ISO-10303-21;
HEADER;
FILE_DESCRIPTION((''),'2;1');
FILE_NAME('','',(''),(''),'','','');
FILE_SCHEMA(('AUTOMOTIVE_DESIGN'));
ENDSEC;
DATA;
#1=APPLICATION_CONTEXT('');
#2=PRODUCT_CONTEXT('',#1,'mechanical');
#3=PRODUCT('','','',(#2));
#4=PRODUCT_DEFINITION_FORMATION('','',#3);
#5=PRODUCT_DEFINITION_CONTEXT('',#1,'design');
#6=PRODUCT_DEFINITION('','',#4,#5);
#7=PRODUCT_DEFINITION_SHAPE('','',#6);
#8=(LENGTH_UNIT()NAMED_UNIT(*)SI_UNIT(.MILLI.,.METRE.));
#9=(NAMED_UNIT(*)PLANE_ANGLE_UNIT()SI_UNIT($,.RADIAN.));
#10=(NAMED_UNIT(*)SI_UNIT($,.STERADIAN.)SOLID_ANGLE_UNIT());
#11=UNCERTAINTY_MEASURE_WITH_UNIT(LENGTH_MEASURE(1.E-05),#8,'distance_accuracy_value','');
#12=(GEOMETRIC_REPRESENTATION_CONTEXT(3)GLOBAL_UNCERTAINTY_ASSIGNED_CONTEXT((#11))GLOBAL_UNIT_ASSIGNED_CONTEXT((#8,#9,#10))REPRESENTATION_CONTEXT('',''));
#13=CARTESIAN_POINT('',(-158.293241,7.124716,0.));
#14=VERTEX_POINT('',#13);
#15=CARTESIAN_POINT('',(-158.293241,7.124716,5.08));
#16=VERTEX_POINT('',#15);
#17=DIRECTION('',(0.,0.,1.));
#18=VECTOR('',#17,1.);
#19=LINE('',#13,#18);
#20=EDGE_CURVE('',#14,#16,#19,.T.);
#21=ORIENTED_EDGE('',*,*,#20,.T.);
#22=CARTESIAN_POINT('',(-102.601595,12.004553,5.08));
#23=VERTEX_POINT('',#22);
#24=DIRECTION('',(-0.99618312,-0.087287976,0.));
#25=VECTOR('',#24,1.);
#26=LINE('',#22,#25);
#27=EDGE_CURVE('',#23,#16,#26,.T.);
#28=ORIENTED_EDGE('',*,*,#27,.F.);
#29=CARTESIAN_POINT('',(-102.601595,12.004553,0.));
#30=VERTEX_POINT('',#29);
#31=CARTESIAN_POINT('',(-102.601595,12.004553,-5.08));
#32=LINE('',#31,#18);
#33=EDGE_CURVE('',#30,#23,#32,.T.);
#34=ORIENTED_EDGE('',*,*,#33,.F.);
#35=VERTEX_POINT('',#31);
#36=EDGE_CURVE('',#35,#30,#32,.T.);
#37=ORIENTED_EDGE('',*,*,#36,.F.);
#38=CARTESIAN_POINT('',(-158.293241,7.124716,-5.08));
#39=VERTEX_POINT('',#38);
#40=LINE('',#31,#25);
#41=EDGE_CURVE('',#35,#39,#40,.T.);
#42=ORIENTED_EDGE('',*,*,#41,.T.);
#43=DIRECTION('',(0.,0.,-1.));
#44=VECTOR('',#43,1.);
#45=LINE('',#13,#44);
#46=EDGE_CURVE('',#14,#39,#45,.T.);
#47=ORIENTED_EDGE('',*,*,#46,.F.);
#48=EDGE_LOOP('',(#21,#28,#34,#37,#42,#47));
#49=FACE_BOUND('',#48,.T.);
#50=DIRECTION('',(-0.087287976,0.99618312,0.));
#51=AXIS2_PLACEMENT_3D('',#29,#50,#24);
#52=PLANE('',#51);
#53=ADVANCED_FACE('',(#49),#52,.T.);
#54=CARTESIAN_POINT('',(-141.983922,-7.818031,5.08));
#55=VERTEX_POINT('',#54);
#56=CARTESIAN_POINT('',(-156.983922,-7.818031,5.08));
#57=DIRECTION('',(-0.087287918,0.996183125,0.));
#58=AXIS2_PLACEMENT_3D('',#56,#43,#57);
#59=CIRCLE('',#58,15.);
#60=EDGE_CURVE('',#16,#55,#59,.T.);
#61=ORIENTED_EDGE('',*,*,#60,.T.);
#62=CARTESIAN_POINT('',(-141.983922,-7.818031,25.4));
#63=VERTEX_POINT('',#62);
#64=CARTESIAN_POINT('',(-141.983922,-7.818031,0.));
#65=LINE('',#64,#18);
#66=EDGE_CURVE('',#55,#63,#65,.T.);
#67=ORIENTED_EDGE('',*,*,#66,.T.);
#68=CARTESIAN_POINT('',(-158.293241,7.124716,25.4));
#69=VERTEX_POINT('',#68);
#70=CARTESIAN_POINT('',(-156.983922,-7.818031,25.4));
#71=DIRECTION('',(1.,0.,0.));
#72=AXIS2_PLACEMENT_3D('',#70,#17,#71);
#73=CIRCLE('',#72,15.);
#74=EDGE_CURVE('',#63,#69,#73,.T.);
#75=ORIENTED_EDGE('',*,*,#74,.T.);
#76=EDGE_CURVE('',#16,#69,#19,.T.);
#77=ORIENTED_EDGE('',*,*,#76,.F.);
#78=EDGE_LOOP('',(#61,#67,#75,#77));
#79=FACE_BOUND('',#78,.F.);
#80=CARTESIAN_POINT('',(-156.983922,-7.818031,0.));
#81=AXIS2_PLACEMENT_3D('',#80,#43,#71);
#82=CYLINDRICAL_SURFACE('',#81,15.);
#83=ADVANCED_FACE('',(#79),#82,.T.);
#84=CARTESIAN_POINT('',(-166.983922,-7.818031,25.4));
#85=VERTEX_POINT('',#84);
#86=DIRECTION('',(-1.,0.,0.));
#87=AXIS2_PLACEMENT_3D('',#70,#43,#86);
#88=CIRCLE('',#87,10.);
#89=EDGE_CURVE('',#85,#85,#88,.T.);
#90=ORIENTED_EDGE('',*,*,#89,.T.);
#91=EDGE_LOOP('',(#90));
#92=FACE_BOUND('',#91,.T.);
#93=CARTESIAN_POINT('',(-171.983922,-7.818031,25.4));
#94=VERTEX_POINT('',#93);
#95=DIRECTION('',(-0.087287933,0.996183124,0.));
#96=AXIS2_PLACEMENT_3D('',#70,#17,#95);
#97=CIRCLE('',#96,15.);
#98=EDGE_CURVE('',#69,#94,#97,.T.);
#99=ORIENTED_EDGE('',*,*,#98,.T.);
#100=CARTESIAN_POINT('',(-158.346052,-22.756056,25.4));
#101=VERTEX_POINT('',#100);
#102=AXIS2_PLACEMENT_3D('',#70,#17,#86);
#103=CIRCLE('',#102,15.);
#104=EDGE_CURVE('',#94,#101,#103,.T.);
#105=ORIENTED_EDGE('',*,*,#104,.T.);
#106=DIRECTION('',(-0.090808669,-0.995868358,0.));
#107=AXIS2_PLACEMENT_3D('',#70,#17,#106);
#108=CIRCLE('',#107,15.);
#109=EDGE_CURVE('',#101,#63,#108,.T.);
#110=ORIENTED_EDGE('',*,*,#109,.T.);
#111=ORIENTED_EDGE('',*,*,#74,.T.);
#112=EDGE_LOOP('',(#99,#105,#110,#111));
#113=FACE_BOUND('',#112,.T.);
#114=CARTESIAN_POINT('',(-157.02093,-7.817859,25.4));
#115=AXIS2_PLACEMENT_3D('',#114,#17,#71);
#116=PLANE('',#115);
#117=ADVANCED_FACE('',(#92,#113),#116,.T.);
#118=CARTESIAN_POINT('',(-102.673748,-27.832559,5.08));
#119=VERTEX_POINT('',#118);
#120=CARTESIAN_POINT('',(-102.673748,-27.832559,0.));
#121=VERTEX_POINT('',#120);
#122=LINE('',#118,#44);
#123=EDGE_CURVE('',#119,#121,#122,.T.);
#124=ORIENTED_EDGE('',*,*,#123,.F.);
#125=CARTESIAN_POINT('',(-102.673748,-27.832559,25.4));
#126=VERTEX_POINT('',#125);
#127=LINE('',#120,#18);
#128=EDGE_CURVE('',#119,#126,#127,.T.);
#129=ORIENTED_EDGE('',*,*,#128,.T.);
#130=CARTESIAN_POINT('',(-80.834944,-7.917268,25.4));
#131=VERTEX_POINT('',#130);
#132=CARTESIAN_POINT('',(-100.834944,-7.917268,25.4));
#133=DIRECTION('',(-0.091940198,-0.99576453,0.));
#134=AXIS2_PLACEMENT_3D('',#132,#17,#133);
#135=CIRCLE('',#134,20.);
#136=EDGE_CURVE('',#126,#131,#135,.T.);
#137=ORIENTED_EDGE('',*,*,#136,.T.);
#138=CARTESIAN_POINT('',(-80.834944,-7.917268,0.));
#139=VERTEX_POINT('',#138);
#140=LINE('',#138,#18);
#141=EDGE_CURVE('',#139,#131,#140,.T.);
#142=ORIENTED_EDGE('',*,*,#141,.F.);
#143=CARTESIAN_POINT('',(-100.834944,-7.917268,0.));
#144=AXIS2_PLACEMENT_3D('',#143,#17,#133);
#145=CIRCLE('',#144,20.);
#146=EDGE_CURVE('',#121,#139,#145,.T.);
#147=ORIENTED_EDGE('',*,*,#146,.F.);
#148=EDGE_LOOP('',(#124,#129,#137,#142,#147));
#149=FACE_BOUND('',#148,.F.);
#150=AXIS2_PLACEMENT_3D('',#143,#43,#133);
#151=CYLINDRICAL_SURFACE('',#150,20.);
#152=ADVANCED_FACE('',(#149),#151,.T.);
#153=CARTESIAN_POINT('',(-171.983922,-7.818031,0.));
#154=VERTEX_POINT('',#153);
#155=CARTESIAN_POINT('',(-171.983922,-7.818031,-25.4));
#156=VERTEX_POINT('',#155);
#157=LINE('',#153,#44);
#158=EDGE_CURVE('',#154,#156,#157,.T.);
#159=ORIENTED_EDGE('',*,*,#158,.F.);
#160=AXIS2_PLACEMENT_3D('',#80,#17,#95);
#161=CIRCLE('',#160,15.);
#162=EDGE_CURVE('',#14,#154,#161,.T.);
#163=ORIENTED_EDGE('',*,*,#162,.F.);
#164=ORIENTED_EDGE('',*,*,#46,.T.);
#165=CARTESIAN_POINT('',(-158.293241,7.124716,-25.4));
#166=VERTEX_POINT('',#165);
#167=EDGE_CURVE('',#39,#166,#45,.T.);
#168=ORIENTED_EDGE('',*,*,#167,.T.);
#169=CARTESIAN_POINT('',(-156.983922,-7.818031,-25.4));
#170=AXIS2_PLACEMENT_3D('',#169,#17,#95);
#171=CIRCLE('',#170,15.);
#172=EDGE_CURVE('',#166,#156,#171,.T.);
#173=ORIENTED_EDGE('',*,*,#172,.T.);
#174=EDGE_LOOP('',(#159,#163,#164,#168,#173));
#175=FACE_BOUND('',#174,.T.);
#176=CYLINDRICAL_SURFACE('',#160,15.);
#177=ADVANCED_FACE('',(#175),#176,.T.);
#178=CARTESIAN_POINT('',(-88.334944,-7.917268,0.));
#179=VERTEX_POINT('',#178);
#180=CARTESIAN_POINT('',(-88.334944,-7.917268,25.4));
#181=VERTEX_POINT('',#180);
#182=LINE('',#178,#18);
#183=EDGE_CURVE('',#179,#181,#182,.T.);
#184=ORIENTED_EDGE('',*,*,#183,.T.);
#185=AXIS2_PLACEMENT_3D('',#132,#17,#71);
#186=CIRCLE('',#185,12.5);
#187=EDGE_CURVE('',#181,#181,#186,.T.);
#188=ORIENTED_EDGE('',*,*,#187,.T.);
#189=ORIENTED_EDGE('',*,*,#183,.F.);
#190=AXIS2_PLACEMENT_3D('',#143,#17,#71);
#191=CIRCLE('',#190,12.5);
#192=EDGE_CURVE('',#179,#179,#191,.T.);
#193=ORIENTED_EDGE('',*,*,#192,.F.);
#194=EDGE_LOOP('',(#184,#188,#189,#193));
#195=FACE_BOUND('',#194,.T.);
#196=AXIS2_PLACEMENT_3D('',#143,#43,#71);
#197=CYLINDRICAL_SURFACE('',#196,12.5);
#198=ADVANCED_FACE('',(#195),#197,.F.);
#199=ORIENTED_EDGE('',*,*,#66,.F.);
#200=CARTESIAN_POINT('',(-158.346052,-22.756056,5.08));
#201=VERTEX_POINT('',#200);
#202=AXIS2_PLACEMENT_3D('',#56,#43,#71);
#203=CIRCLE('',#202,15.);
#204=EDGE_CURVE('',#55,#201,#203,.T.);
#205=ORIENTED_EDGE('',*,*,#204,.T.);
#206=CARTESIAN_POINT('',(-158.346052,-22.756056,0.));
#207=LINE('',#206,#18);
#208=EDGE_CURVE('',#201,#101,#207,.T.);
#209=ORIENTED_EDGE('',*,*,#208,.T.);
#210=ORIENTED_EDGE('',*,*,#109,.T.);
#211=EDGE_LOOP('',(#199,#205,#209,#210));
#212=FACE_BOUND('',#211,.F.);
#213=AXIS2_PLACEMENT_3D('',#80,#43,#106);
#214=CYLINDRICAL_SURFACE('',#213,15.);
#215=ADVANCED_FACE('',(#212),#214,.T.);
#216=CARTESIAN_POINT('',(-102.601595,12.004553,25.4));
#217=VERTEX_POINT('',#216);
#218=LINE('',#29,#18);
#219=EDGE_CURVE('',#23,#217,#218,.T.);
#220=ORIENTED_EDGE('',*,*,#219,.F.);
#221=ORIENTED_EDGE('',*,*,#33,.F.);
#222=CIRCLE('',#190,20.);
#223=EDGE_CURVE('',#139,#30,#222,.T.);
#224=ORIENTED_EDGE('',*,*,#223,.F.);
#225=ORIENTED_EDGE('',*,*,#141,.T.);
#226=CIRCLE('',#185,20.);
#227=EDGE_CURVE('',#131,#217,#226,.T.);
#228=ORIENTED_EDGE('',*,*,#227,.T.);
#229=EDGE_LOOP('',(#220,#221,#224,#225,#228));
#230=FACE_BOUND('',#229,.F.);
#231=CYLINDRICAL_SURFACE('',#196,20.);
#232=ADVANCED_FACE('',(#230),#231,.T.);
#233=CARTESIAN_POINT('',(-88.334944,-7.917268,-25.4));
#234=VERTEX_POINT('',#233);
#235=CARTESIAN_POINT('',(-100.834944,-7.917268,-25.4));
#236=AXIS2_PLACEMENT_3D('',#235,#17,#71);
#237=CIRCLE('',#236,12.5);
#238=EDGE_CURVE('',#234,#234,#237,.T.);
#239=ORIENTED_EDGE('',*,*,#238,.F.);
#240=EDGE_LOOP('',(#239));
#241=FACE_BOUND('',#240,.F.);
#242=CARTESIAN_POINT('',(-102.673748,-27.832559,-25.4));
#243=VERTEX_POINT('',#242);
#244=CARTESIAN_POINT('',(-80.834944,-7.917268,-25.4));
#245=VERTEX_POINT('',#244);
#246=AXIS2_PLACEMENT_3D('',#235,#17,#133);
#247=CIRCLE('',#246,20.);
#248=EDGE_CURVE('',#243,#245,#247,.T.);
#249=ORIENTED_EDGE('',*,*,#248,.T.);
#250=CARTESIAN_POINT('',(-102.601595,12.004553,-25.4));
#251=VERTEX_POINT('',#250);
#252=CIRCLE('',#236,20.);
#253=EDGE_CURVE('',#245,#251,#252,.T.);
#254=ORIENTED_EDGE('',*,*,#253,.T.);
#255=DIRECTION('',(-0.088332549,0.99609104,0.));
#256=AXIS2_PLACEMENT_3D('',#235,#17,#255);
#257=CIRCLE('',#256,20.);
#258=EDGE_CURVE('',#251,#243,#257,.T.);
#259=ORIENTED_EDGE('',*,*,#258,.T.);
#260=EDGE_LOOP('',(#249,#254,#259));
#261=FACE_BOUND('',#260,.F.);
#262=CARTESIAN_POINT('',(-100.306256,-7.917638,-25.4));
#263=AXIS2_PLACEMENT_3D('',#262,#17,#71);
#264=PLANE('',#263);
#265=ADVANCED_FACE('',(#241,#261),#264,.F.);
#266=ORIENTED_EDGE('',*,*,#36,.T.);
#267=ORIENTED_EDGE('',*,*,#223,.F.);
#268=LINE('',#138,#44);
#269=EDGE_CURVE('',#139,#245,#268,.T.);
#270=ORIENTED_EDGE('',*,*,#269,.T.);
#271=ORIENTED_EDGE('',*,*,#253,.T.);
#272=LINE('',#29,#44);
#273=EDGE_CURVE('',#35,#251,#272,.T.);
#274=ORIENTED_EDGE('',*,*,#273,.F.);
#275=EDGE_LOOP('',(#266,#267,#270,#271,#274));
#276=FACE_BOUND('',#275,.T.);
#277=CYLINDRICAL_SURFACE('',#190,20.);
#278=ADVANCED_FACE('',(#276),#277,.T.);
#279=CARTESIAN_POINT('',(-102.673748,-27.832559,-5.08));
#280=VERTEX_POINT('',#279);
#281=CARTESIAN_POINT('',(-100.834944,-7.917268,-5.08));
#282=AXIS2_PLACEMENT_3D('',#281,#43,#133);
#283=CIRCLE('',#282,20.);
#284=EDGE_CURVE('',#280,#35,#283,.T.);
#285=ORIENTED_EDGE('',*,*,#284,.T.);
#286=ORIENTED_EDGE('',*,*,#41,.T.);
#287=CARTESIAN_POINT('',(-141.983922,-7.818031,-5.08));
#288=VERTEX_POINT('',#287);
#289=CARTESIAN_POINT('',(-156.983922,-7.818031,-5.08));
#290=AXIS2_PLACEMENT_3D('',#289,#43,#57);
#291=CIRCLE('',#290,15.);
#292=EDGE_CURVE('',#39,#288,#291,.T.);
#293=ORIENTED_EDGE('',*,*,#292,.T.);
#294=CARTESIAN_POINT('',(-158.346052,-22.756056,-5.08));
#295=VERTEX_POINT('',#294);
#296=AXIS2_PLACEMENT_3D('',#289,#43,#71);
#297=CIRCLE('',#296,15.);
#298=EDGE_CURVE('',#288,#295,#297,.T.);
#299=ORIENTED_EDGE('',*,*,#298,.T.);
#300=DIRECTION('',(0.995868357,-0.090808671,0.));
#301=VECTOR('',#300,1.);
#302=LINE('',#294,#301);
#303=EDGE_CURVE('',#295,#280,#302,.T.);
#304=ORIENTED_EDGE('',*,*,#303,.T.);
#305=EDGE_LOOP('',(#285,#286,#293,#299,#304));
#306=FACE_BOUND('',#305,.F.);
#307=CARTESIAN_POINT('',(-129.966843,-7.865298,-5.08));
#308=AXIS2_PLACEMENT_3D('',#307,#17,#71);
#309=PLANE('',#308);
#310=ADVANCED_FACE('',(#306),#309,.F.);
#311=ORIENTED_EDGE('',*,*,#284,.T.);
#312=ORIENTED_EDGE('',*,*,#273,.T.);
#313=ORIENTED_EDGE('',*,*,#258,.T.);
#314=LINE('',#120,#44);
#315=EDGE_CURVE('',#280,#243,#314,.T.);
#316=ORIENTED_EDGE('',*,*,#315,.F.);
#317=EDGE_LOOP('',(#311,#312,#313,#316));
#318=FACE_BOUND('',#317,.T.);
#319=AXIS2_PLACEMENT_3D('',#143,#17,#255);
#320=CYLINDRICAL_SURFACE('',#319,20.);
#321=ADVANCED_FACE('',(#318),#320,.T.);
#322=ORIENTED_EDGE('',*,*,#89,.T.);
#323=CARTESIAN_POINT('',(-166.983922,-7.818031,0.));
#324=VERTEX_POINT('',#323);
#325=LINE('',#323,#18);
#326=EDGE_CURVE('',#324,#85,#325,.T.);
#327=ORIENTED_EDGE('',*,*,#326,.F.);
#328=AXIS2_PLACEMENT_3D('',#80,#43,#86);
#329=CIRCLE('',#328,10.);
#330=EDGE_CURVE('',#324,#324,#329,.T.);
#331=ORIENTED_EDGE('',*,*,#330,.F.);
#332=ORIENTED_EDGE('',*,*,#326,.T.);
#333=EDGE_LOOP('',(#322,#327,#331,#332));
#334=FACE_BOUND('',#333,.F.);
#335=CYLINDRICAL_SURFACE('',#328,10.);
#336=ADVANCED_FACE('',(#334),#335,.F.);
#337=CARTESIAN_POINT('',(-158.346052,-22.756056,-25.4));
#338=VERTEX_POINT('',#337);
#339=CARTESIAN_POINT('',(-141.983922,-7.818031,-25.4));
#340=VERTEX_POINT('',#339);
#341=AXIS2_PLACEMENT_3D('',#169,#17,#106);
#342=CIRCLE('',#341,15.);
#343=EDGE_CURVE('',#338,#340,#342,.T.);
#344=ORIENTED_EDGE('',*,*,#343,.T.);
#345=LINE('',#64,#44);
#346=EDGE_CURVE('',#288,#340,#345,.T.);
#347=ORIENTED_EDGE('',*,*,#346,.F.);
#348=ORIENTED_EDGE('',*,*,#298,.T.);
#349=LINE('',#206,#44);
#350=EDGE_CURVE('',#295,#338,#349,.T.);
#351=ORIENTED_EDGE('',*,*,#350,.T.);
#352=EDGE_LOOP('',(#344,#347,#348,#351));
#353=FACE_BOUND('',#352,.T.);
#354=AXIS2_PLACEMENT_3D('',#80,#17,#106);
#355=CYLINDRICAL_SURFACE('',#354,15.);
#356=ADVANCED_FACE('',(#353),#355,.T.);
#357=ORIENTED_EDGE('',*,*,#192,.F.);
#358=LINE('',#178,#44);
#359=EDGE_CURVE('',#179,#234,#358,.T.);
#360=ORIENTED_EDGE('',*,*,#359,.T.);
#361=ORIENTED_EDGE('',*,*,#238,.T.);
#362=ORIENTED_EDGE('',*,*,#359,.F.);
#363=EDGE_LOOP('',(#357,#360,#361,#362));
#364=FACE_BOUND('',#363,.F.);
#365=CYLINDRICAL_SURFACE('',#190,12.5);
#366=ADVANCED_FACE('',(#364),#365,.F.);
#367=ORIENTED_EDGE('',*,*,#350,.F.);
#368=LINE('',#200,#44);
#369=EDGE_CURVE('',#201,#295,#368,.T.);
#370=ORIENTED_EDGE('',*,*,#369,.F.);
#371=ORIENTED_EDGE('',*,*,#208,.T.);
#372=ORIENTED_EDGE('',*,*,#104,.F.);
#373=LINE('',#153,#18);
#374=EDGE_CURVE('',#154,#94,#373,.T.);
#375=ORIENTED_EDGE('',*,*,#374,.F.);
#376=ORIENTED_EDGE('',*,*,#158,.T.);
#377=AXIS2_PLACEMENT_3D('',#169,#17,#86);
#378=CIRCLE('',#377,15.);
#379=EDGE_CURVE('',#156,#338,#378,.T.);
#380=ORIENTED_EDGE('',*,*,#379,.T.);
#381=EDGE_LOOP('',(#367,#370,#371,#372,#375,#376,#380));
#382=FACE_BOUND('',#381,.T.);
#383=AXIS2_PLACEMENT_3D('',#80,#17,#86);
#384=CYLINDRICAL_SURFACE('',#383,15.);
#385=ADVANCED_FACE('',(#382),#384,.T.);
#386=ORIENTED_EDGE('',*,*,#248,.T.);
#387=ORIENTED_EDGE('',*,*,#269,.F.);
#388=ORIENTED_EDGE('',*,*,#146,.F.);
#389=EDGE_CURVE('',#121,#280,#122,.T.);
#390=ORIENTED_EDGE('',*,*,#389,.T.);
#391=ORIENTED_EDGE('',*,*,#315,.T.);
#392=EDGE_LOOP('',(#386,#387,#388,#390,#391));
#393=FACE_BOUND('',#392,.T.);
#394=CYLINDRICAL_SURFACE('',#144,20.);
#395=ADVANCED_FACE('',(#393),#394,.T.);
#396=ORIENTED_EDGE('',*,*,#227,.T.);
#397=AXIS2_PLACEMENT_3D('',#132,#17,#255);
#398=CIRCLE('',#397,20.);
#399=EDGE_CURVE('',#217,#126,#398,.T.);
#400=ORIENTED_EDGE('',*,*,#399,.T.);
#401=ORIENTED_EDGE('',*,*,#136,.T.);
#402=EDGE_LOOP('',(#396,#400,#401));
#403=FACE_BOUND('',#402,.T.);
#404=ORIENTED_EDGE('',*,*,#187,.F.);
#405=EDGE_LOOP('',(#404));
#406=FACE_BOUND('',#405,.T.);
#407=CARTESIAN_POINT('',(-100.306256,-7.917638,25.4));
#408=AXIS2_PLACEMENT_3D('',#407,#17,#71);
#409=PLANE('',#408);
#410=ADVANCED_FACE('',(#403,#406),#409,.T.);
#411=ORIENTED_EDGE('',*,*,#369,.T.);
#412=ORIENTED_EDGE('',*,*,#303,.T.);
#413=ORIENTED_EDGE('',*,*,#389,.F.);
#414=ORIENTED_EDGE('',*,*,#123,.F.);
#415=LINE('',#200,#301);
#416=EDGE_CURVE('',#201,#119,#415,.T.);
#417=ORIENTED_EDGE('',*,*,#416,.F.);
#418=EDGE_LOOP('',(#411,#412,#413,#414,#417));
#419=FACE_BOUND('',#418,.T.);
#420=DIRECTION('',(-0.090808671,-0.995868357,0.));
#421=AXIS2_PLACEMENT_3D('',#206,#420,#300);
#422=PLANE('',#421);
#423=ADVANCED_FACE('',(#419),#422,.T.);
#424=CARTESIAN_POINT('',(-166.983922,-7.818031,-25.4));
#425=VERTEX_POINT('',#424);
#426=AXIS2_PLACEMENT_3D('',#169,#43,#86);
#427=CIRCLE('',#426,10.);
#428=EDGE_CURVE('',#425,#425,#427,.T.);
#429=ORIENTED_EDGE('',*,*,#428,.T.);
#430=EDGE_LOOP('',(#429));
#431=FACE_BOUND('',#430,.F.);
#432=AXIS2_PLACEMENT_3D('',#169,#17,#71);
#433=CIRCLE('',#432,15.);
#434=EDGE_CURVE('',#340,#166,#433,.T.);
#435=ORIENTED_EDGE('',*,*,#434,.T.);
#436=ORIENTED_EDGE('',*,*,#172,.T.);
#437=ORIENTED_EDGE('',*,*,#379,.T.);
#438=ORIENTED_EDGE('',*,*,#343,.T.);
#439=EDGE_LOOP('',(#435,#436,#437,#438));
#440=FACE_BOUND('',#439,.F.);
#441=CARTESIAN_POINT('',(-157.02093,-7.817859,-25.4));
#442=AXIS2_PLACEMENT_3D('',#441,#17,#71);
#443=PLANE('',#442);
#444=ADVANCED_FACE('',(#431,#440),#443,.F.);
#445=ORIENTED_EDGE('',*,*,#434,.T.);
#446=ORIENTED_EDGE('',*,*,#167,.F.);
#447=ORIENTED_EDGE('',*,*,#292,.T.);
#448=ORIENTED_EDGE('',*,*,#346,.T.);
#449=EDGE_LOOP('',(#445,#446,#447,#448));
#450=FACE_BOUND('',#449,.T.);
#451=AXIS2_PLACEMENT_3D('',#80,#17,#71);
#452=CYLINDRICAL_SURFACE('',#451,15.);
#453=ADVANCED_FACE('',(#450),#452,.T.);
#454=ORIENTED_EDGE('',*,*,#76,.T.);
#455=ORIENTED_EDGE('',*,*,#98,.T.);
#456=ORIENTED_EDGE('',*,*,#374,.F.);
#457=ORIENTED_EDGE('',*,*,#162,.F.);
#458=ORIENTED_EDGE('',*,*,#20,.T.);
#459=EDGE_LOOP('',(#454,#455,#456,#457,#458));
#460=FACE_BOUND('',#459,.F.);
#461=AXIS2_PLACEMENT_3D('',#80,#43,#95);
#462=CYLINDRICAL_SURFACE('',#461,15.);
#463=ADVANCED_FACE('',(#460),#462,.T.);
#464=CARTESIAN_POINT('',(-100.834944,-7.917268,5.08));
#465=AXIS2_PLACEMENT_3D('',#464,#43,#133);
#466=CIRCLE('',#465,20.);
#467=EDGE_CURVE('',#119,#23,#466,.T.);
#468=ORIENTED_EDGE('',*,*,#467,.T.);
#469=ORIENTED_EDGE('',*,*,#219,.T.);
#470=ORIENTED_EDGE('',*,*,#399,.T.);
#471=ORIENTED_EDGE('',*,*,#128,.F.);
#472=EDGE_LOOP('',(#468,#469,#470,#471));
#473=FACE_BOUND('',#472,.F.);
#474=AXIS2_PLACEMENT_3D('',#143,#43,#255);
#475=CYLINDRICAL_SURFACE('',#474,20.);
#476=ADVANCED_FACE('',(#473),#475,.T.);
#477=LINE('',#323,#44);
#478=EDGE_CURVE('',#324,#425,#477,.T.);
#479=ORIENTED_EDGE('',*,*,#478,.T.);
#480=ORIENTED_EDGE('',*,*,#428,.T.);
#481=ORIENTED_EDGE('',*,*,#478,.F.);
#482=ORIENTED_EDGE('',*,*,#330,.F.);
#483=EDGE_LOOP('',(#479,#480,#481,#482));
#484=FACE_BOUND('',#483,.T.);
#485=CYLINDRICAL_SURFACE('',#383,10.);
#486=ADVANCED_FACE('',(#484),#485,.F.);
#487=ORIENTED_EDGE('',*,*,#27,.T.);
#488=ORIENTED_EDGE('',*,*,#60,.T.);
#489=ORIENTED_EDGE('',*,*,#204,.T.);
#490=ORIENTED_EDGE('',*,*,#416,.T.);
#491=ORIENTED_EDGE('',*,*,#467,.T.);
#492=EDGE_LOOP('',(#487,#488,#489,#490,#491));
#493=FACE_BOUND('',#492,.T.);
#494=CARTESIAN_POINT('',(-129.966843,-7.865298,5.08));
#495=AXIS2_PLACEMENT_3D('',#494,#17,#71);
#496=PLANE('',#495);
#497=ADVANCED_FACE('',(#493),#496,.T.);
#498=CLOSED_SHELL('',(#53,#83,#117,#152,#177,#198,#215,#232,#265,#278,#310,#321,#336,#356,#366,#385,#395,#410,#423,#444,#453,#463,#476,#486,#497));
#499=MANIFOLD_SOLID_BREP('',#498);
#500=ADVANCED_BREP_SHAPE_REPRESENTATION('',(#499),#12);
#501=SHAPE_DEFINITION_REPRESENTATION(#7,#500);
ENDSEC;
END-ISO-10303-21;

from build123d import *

# Parameters (mm, degrees)
F1_DEPTH      = 25.4
F1_DEPTH_BACK = 25.4
F2_DEPTH      = 5.08
F2_DEPTH_BACK = 5.08
F0_R          = 12.5
F3_DEPTH      = 25.4
F3_DEPTH_BACK = 25.4


# Not quite as in the source:
# - ends of sketch curves that miss each other by under 0.0002 mm in the source are joined


with BuildPart() as f1:
    # F0 (on Top) → F1 (new body, two sides)
    with BuildSketch(Plane.XY) as f1_sk:
        with BuildLine():
            ThreePointArc((-141.983922, -7.818031), (-146.8508026584, 3.2418013861), (-158.2932409879, 7.1247158622))
            ThreePointArc((-158.2932409879, 7.1247158622), (-168.0437543861, 2.3150883416), (-171.983922, -7.818031))
            ThreePointArc((-171.983922, -7.818031), (-168.0616462811, -17.9315874838), (-158.3460520332, -22.7560563639))
            ThreePointArc((-158.3460520332, -22.7560563639), (-146.8703655162, -18.8957552811), (-141.983922, -7.818031))
        make_face()
        with BuildLine():
            ThreePointArc((-146.983922, -7.818031), (-156.983922, -17.818031), (-166.983922, -7.818031))
            ThreePointArc((-166.983922, -7.818031), (-156.983922, 2.181969), (-146.983922, -7.818031))
        make_face(mode=Mode.SUBTRACT)
    extrude(amount=F1_DEPTH)
    extrude(f1_sk.sketch, amount=-F1_DEPTH_BACK)

    # F0 (on Top) → F2 (join, two sides)
    with BuildSketch(Plane.XY) as f2_sk:
        with BuildLine():
            ThreePointArc((-102.6737479638, -27.8325586075), (-120.8349111956, -7.8810440571), (-102.601594983, 12.004552808))
            Line((-102.601594983, 12.004552808), (-158.293241, 7.124716))
            ThreePointArc((-158.293241, 7.124716), (-146.8508026584, 3.2418013861), (-141.983922, -7.818031))
            ThreePointArc((-141.983922, -7.818031), (-146.8703655162, -18.8957552811), (-158.3460520332, -22.7560563639))
            Line((-158.3460520332, -22.7560563639), (-102.6737479638, -27.8325586075))
        make_face()
    extrude(amount=F2_DEPTH)
    extrude(f2_sk.sketch, amount=-F2_DEPTH_BACK)

    # F0 (on Top) → F3 (join, two sides)
    with BuildSketch(Plane.XY) as f3_sk:
        with BuildLine():
            ThreePointArc((-102.6737479638, -27.8325586075), (-87.3585958165, -22.6952258981), (-80.834944, -7.917268))
            ThreePointArc((-80.834944, -7.917268), (-87.3318521255, 6.8362573357), (-102.601594983, 12.004552808))
            ThreePointArc((-102.601594983, 12.004552808), (-120.8349111956, -7.8810440571), (-102.6737479638, -27.8325586075))
        make_face()
        with Locations((-100.834944, -7.917268)):
            Circle(F0_R, mode=Mode.SUBTRACT)
    extrude(amount=F3_DEPTH)
    extrude(f3_sk.sketch, amount=-F3_DEPTH_BACK)


solid = f1.part
